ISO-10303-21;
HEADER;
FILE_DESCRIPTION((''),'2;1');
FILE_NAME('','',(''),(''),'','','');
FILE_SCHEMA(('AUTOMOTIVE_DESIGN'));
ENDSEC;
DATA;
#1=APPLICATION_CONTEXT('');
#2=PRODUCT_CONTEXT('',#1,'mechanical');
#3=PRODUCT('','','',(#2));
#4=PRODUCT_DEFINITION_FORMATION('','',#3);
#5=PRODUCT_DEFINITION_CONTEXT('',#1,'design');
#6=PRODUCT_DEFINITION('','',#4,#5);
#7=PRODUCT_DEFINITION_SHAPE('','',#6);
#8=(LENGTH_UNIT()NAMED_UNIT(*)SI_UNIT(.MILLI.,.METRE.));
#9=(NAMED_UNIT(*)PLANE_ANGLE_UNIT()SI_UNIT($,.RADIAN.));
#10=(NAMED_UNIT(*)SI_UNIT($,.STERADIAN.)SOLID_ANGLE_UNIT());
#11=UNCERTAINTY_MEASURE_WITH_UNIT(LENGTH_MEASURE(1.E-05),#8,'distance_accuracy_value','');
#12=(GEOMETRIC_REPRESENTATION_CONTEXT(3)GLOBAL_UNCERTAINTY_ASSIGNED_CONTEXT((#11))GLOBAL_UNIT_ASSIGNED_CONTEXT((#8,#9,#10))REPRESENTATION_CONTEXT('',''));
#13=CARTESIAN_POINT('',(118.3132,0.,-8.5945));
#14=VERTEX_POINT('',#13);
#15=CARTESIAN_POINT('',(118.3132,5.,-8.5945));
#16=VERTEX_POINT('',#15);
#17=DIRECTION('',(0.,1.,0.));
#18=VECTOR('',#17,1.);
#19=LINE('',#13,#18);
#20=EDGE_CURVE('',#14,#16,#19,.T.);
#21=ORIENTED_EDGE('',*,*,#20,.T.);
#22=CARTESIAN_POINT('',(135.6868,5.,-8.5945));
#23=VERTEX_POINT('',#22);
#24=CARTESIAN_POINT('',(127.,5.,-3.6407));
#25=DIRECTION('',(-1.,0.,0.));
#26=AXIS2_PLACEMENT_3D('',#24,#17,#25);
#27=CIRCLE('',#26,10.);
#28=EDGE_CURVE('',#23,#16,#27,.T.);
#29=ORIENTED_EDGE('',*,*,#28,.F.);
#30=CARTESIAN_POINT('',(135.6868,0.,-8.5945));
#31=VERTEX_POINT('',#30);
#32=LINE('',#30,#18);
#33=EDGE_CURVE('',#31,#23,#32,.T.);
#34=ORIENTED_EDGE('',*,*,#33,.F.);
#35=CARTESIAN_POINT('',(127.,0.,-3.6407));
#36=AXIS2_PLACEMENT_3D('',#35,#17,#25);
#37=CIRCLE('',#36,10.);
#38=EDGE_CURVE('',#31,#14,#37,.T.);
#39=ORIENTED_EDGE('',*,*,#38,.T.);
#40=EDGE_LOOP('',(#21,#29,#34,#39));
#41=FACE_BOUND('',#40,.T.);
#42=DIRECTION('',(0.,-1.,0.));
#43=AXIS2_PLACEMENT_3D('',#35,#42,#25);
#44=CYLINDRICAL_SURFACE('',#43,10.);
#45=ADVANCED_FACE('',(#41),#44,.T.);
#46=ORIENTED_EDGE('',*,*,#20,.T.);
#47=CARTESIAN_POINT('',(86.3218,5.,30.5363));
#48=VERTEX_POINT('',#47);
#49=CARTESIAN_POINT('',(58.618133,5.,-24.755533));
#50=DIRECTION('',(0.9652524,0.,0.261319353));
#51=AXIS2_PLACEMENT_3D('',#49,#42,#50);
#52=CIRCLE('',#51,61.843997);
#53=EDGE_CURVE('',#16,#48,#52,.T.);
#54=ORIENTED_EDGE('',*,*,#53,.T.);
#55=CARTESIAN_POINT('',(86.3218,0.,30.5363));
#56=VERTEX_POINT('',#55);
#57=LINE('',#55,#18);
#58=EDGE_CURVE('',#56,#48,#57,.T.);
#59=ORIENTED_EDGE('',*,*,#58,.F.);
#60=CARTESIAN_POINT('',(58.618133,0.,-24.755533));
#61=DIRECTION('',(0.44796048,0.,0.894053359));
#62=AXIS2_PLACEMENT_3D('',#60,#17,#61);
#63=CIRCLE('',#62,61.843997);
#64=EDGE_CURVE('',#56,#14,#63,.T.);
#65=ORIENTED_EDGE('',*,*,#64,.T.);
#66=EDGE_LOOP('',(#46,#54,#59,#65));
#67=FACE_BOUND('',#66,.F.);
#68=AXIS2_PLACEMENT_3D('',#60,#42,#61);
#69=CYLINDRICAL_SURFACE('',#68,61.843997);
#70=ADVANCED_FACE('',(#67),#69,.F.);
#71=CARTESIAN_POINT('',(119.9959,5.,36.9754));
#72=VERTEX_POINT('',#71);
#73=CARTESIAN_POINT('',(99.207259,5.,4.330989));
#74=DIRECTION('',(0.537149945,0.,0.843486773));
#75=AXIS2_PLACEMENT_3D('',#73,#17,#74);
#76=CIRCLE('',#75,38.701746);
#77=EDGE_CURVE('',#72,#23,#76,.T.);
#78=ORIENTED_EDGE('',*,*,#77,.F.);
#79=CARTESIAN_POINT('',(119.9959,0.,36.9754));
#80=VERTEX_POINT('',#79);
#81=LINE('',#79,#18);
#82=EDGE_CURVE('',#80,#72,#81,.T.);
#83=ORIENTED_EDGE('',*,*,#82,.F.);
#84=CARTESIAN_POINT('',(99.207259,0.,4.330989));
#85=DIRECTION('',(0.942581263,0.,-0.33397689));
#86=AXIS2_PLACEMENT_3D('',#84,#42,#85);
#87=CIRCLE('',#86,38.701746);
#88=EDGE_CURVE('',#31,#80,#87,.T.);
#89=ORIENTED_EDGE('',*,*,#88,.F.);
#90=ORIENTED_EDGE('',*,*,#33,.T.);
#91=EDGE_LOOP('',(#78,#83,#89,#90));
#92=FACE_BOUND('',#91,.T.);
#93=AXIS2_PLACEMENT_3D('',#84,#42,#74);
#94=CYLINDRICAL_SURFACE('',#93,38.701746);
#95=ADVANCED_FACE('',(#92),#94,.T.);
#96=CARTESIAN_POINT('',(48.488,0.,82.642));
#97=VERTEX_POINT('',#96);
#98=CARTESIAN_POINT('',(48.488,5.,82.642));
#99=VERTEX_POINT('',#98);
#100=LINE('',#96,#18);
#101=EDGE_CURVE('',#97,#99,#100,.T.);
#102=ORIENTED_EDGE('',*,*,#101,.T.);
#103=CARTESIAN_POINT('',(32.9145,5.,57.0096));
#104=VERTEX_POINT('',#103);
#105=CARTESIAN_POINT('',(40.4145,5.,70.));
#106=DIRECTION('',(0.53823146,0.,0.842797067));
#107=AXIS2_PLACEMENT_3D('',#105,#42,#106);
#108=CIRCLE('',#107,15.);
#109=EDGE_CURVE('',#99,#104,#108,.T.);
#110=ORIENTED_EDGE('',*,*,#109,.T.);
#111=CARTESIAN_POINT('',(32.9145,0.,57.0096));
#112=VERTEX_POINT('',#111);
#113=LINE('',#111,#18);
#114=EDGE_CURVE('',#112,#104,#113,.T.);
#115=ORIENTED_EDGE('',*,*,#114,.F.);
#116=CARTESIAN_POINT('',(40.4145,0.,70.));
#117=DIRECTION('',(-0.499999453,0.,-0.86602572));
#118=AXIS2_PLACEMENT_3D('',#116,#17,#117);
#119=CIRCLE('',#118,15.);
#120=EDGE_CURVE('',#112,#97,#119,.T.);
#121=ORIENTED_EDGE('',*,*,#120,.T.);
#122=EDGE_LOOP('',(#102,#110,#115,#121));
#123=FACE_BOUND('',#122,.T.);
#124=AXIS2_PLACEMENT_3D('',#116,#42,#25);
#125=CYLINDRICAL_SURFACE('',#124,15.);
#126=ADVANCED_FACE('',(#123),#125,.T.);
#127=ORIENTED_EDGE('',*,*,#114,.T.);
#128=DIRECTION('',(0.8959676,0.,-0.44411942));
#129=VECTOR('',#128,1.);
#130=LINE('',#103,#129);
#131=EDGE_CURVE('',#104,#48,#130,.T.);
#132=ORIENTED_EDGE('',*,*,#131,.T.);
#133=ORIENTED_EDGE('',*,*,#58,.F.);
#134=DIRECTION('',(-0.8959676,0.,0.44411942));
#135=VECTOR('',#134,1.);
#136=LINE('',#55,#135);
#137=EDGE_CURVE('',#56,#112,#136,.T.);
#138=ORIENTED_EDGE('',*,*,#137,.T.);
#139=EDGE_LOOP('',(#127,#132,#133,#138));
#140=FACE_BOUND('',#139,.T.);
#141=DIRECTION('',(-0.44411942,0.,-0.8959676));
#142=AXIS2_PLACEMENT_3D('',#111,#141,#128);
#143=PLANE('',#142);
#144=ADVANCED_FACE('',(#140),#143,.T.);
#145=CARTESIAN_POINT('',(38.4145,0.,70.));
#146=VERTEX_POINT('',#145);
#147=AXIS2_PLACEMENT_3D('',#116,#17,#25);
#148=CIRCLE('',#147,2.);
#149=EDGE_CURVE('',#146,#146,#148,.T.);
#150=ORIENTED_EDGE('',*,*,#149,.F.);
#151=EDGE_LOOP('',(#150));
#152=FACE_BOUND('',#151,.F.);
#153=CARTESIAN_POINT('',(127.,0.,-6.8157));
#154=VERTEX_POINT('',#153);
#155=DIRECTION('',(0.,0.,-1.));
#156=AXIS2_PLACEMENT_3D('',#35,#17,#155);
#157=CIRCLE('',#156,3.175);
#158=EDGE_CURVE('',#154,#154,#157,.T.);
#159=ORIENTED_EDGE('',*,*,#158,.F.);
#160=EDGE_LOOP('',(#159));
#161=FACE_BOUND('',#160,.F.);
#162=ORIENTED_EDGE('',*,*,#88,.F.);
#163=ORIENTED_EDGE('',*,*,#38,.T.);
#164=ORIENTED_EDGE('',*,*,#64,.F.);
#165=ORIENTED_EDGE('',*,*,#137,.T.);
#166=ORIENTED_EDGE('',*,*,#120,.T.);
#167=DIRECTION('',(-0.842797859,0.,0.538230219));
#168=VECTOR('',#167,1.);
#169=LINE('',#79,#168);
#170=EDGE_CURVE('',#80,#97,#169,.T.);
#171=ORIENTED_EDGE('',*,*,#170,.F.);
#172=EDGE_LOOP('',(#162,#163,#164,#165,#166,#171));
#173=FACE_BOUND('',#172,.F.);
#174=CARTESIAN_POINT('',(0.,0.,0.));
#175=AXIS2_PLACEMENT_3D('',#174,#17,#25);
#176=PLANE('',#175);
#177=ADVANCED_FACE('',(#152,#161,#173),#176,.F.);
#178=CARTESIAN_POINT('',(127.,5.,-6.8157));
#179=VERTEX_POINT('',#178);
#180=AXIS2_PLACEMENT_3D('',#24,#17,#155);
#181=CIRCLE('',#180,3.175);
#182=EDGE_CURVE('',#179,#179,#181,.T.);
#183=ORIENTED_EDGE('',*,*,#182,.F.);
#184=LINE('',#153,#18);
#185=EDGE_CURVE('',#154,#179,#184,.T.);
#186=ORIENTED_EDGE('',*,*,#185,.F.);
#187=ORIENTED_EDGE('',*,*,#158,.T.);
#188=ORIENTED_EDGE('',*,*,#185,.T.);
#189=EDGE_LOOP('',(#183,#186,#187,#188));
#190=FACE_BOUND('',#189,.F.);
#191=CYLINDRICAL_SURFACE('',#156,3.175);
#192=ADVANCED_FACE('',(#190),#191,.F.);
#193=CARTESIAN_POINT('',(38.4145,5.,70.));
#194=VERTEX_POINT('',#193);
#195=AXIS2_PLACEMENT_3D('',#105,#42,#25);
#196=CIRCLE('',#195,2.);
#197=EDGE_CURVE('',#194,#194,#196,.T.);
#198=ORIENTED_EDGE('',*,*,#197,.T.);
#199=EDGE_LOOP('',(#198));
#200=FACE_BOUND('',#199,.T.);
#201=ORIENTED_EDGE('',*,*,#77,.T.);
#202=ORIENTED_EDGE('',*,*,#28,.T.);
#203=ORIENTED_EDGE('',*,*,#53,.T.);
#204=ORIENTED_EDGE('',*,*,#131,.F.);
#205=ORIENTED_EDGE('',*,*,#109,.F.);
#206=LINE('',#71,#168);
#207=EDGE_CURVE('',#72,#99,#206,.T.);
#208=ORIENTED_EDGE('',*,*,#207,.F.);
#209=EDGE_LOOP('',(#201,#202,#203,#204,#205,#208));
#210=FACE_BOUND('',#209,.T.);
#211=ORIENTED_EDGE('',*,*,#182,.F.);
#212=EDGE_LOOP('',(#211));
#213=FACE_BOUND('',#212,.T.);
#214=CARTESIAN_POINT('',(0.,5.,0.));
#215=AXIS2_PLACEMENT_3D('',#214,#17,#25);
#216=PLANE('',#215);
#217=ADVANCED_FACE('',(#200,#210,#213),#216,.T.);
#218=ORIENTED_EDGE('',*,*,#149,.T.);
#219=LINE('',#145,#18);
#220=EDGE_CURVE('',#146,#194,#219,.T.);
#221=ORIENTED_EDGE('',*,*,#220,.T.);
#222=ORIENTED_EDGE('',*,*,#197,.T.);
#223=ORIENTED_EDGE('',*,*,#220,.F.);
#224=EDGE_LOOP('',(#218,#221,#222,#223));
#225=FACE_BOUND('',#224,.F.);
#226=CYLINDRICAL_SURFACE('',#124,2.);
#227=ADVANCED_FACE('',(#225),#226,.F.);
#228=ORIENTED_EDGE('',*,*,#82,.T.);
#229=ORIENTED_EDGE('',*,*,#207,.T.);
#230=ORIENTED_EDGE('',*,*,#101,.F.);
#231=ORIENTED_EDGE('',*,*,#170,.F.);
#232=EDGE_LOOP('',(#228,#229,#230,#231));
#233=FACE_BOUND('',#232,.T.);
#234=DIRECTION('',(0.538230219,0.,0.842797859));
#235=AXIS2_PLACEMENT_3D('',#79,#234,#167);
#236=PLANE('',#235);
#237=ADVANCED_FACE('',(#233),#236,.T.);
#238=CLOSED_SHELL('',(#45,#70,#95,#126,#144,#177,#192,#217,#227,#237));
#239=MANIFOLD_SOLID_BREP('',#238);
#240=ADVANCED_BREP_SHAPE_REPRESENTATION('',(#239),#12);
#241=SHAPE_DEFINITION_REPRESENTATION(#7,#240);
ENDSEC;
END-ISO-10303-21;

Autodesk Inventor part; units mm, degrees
ref_plane "YZ Plane" through (0, 0, 0) normal (1, 0, 0) x (0, 1, 0)
ref_plane "XZ Plane" through (0, 0, 0) normal (0, 1, 0) x (-1, 0, 0)
ref_plane "XY Plane" through (0, 0, 0) normal (0, 0, 1) x (1, 0, 0)
sketch "Cara" plane through (0, 0, 0) normal (0, 0, 1) x (1, 0, 0)
  line L0 (-22.1935, -24.9393) -> (-15.1747, -17.9205)
  arc A0 (-12.474, -17.8034) -> (-15.1747, -17.9205) centre (-13.7605, -19.3347) ccw
  arc A1 (-12.474, -17.8034) -> (-6.107, -21.4794) centre (1.0981, -1.6477) ccw
  arc A2 (-4.8581, -23.8768) -> (-6.107, -21.4794) centre (-6.79, -23.3592) ccw
  line L1 (-4.8581, -23.8768) -> (-7.4272, -33.4646)
  arc A3 (-9.9928, -34.8439) -> (-7.4272, -33.4646) centre (-9.359, -32.947) ccw
  arc A4 (-22.1052, -27.8509) -> (-9.9928, -34.8439) centre (1.0981, -1.6477) ccw
  arc A5 (-22.1935, -24.9393) -> (-22.1052, -27.8509) centre (-20.7793, -26.3535) ccw
  line L2 (9.6235, -33.4646) -> (7.0544, -23.8768)
  arc A6 (8.3033, -21.4794) -> (7.0544, -23.8768) centre (8.9863, -23.3592) ccw
  arc A7 (8.3033, -21.4794) -> (14.6703, -17.8034) centre (1.0981, -1.6477) ccw
  arc A8 (17.371, -17.9205) -> (14.6703, -17.8034) centre (15.9568, -19.3347) ccw
  line L3 (17.371, -17.9205) -> (24.3898, -24.9393)
  arc A9 (24.3015, -27.8509) -> (24.3898, -24.9393) centre (22.9756, -26.3535) ccw
  arc A10 (12.1891, -34.8439) -> (24.3015, -27.8509) centre (1.0981, -1.6477) ccw
  arc A11 (9.6235, -33.4646) -> (12.1891, -34.8439) centre (11.5553, -32.947) ccw
  line L4 (32.9151, -10.173) -> (23.3272, -7.604)
  arc A12 (21.8755, -5.3237) -> (23.3272, -7.604) centre (23.8449, -5.6721) ccw
  arc A13 (21.8755, -5.3237) -> (21.8755, 2.0283) centre (1.0981, -1.6477) ccw
  arc A14 (23.3272, 4.3086) -> (21.8755, 2.0283) centre (23.8449, 2.3767) ccw
  line L5 (23.3272, 4.3086) -> (32.9151, 6.8776)
  arc A15 (35.3924, 5.3454) -> (32.9151, 6.8776) centre (33.4327, 4.9458) ccw
  arc A16 (35.3924, -8.6408) -> (35.3924, 5.3454) centre (1.0981, -1.6477) ccw
  arc A17 (32.9151, -10.173) -> (35.3924, -8.6408) centre (33.4327, -8.2412) ccw
  line L6 (24.3898, 21.6439) -> (17.371, 14.6251)
  arc A18 (14.6703, 14.508) -> (17.371, 14.6251) centre (15.9568, 16.0394) ccw
  arc A19 (14.6703, 14.508) -> (8.3033, 18.184) centre (1.0981, -1.6477) ccw
  arc A20 (7.0544, 20.5814) -> (8.3033, 18.184) centre (8.9863, 20.0638) ccw
  line L7 (7.0544, 20.5814) -> (9.6235, 30.1693)
  arc A21 (12.1891, 31.5486) -> (9.6235, 30.1693) centre (11.5553, 29.6516) ccw
  arc A22 (24.3015, 24.5555) -> (12.1891, 31.5486) centre (1.0981, -1.6477) ccw
  arc A23 (24.3898, 21.6439) -> (24.3015, 24.5555) centre (22.9756, 23.0582) ccw
  line L8 (-7.4272, 30.1693) -> (-4.8581, 20.5814)
  arc A24 (-6.107, 18.184) -> (-4.8581, 20.5814) centre (-6.79, 20.0638) ccw
  arc A25 (-6.107, 18.184) -> (-12.474, 14.508) centre (1.0981, -1.6477) ccw
  arc A26 (-15.1747, 14.6251) -> (-12.474, 14.508) centre (-13.7605, 16.0394) ccw
  line L9 (-15.1747, 14.6251) -> (-22.1935, 21.6439)
  arc A27 (-22.1052, 24.5555) -> (-22.1935, 21.6439) centre (-20.7793, 23.0582) ccw
  arc A28 (-9.9928, 31.5486) -> (-22.1052, 24.5555) centre (1.0981, -1.6477) ccw
  arc A29 (-7.4272, 30.1693) -> (-9.9928, 31.5486) centre (-9.359, 29.6516) ccw
  line L10 (-30.7188, 6.8776) -> (-21.131, 4.3086)
  arc A30 (-19.6792, 2.0283) -> (-21.131, 4.3086) centre (-21.6486, 2.3767) ccw
  arc A31 (-19.6792, 2.0283) -> (-19.6792, -5.3237) centre (1.0981, -1.6477) ccw
  arc A32 (-21.131, -7.604) -> (-19.6792, -5.3237) centre (-21.6486, -5.6721) ccw
  line L11 (-21.131, -7.604) -> (-30.7188, -10.173)
  arc A33 (-33.1961, -8.6408) -> (-30.7188, -10.173) centre (-31.2365, -8.2412) ccw
  arc A34 (-33.1961, 5.3454) -> (-33.1961, -8.6408) centre (1.0981, -1.6477) ccw
  arc A35 (-30.7188, 6.8776) -> (-33.1961, 5.3454) centre (-31.2365, 4.9458) ccw
  circle A36 centre (-37.4568, -19.3542) radius 1.5875
  circle A37 centre (39.653, 16.0588) radius 1.5875
  circle A38 centre (-16.6083, 36.9072) radius 1.5875
  circle A39 centre (18.8046, -40.2026) radius 1.5875
  circle A40 centre (1.0981, -1.6477) radius 15.5
  arc A41 (13.186, 39.6183) -> (16.9444, 39.4394) centre (15.4349, 47.2957) ccw
  arc A42 (13.186, 39.6183) -> (-10.9897, 39.6183) centre (1.0981, -1.6477) ccw
  arc A43 (-15.0916, 39.5133) -> (-10.9897, 39.6183) centre (-13.2386, 47.2957) ccw
  arc A44 (-15.0916, 39.5133) -> (-19.5734, 37.455) centre (-16.0181, 35.6221) ccw
  arc A45 (-22.3261, 34.412) -> (-19.5734, 37.455) centre (-26.6841, 41.1208) ccw
  arc A46 (-22.3261, 34.412) -> (-34.8255, 21.9848) centre (1.0981, -1.6477) ccw
  arc A47 (-37.5746, 19.4158) -> (-34.8255, 21.9848) centre (-41.5089, 26.3816) ccw
  arc A48 (-39.989, 14.1986) -> (-37.5746, 19.4158) centre (-37.4054, 16.1703) ccw
  arc A49 (-40.1679, 10.4402) -> (-39.989, 14.1986) centre (-47.8453, 12.6891) ccw
  arc A50 (-40.1679, 10.4402) -> (-40.2027, -13.6161) centre (1.0981, -1.6477) ccw
  arc A51 (-40.1338, -17.8165) -> (-40.2027, -13.6161) centre (-47.8865, -15.8428) ccw
  arc A52 (-40.1338, -17.8165) -> (-38.0349, -22.3868) centre (-36.2575, -18.8034) ccw
  arc A53 (-34.8937, -25.1762) -> (-38.0349, -22.3868) centre (-41.5898, -29.5536) ccw
  arc A54 (-34.8937, -25.1762) -> (-22.5344, -37.5713) centre (1.0981, -1.6477) ccw
  arc A55 (-19.9654, -40.3204) -> (-22.5344, -37.5713) centre (-26.9311, -44.2547) ccw
  arc A56 (-14.7481, -42.7348) -> (-19.9654, -40.3204) centre (-16.7198, -40.1512) ccw
  arc A57 (-10.9897, -42.9137) -> (-14.7481, -42.7348) centre (-13.2386, -50.5911) ccw
  arc A58 (-10.9897, -42.9137) -> (13.0666, -42.9485) centre (1.0981, -1.6477) ccw
  arc A59 (17.2235, -42.8687) -> (13.0666, -42.9485) centre (15.2932, -50.6324) ccw
  arc A60 (17.2235, -42.8687) -> (21.7574, -40.7935) centre (18.1887, -38.9869) ccw
  arc A61 (24.5347, -37.6994) -> (21.7574, -40.7935) centre (28.895, -44.4067) ccw
  arc A62 (24.5347, -37.6994) -> (37.0217, -25.2802) centre (1.0981, -1.6477) ccw
  arc A63 (39.7709, -22.7112) -> (37.0217, -25.2802) centre (43.7052, -29.6769) ccw
  arc A64 (42.1093, -17.3982) -> (39.7709, -22.7112) centre (39.6017, -19.4656) ccw
  arc A65 (42.3332, -13.8408) -> (42.1093, -17.3982) centre (50.0048, -16.1093) ccw
  arc A66 (42.3332, -13.8408) -> (42.3989, 10.3207) centre (1.0981, -1.6477) ccw
  arc A67 (42.3301, 14.5211) -> (42.3989, 10.3207) centre (50.0828, 12.5474) ccw
  arc A68 (42.3301, 14.5211) -> (40.2312, 19.0914) centre (38.4538, 15.508) ccw
  arc A69 (37.09, 21.8808) -> (40.2312, 19.0914) centre (43.7861, 26.2582) ccw
  arc A70 (37.09, 21.8808) -> (24.7307, 34.2759) centre (1.0981, -1.6477) ccw
  arc A71 (22.1617, 37.0251) -> (24.7307, 34.2759) centre (29.1274, 40.9594) ccw
  arc A72 (16.9444, 39.4394) -> (22.1617, 37.0251) centre (18.9161, 36.8558) ccw
  arc A73 (-38.8583, 20.9988) -> (-42.0265, 14.1525) centre (-36.2077, 15.616) ccw
  spline S0 degree 3 poles (-40.2504, 14.5992) (-40.3671, 14.8104) (-40.4601, 15.0344) (-40.6458, 15.6766) (-40.6826, 16.1053) (-40.5958, 16.8869) (-40.4968, 17.2357) (-40.1864, 17.8912) (-39.9757, 18.1925) (-39.4148, 18.7612) (-39.0515, 19.0059) (-38.4565, 19.2528) (-38.255, 19.3143) (-38.0493, 19.3558) knots 0 0 0 0 0.118944 0.118944 0.328096 0.328096 0.504735 0.504735 0.683825 0.683825 0.89662 0.89662 1 1 1 1
  line L12 (-38.8583, 20.9988) -> (-38.0493, 19.3558)
  arc A74 (-38.8583, 20.9988) -> (-42.0265, 14.1525) centre (-36.2077, 15.616) ccw
  line L13 (-40.2504, 14.5992) -> (-42.0265, 14.1525)
  line L14 (-38.5582, 21.1573) -> (-37.5746, 19.4158)
  arc A75 (-37.5746, 19.4158) -> (-34.8255, 21.9848) centre (-41.5089, 26.3816) ccw
  line L15 (-36.4963, 23.084) -> (-34.8255, 21.9848)
  arc A76 (-38.5582, 21.1573) -> (-36.4963, 23.084) centre (-41.5089, 26.3816) ccw
  spline S1 degree 3 poles (-38.0493, 19.3558) (-37.9271, 19.3805) (-37.8093, 19.397) (-37.6564, 19.4108) (-37.6155, 19.4137) (-37.5746, 19.4158) knots 0 0 0 0 0.731153 0.731153 1 1 1 1
  line L16 (-38.5582, 21.1573) -> (-37.5746, 19.4158)
  arc A77 (-38.8583, 20.9988) -> (-38.5582, 21.1573) centre (-41.5089, 26.3816) ccw
  line L17 (-38.8583, 20.9988) -> (-38.0493, 19.3558)
  spline S2 degree 3 poles (-39.989, 14.1986) (-40.081, 14.3191) (-40.1695, 14.4526) (-40.2504, 14.5992) knots 0 0 0 0 1 1 1 1
  line L18 (-40.2504, 14.5992) -> (-42.0265, 14.1525)
  arc A78 (-41.953, 13.8212) -> (-42.0265, 14.1525) centre (-47.8453, 12.6891) ccw
  line L19 (-39.989, 14.1986) -> (-41.953, 13.8212)
  line L20 (-39.989, 14.1986) -> (-41.953, 13.8212)
  arc A79 (-42.0872, 11.0024) -> (-41.953, 13.8212) centre (-47.8453, 12.6891) ccw
  line L21 (-42.0872, 11.0024) -> (-40.1679, 10.4402)
  arc A80 (-40.1679, 10.4402) -> (-39.989, 14.1986) centre (-47.8453, 12.6891) ccw
  arc A81 (-42.0872, 11.0024) -> (-42.1236, -14.1728) centre (1.0981, -1.6477) ccw
  line L22 (-36.4963, 23.084) -> (-34.8255, 21.9848)
  arc A82 (-22.3261, 34.412) -> (-34.8255, 21.9848) centre (1.0981, -1.6477) ccw
  line L23 (-23.4156, 36.0892) -> (-22.3261, 34.412)
  arc A83 (-23.4156, 36.0892) -> (-36.4963, 23.084) centre (1.0981, -1.6477) ccw
  line L24 (-23.4156, 36.0892) -> (-22.3261, 34.412)
  arc A84 (-22.3261, 34.412) -> (-19.5734, 37.455) centre (-26.6841, 41.1208) ccw
  line L25 (-21.3511, 38.3714) -> (-19.5734, 37.455)
  arc A85 (-23.4156, 36.0892) -> (-21.3511, 38.3714) centre (-26.6841, 41.1208) ccw
  line L26 (-21.3511, 38.3714) -> (-19.5734, 37.455)
  arc A86 (-15.0916, 39.5133) -> (-19.5734, 37.455) centre (-16.0181, 35.6221) ccw
  line L27 (-14.6284, 41.4589) -> (-15.0916, 39.5133)
  arc A87 (-14.6284, 41.4589) -> (-21.3511, 38.3714) centre (-16.0181, 35.6221) ccw
  line L28 (-14.6284, 41.4589) -> (-15.0916, 39.5133)
  arc A88 (-15.0916, 39.5133) -> (-10.9897, 39.6183) centre (-13.2386, 47.2957) ccw
  line L29 (-11.5519, 41.5377) -> (-10.9897, 39.6183)
  arc A89 (-14.6284, 41.4589) -> (-11.5519, 41.5377) centre (-13.2386, 47.2957) ccw
  line L30 (-11.5519, 41.5377) -> (-10.9897, 39.6183)
  arc A90 (13.186, 39.6183) -> (-10.9897, 39.6183) centre (1.0981, -1.6477) ccw
  line L31 (13.7482, 41.5377) -> (13.186, 39.6183)
  arc A91 (13.7482, 41.5377) -> (-11.5519, 41.5377) centre (1.0981, -1.6477) ccw
  line L32 (16.9444, 39.4394) -> (16.567, 41.4035)
  arc A92 (13.7482, 41.5377) -> (16.567, 41.4035) centre (15.4349, 47.2957) ccw
  line L33 (13.7482, 41.5377) -> (13.186, 39.6183)
  arc A93 (13.186, 39.6183) -> (16.9444, 39.4394) centre (15.4349, 47.2957) ccw
  spline S3 degree 3 poles (16.9444, 39.4394) (17.0649, 39.5314) (17.1985, 39.6199) (17.3451, 39.7009) knots 0 0 0 0 1 1 1 1
  line L34 (17.3451, 39.7009) -> (16.8984, 41.4769)
  arc A94 (16.567, 41.4035) -> (16.8984, 41.4769) centre (15.4349, 47.2957) ccw
  line L35 (16.9444, 39.4394) -> (16.567, 41.4035)
  spline S4 degree 3 poles (17.3451, 39.7009) (17.5563, 39.8175) (17.7803, 39.9105) (18.4224, 40.0962) (18.8512, 40.133) (19.6327, 40.0462) (19.9815, 39.9473) (20.6371, 39.6368) (20.9383, 39.4261) (21.507, 38.8652) (21.7517, 38.502) (21.9986, 37.907) (22.0601, 37.7054) (22.1017, 37.4997) knots 0 0 0 0 0.118944 0.118944 0.328096 0.328096 0.504735 0.504735 0.683825 0.683825 0.89662 0.89662 1 1 1 1
  line L36 (23.7446, 38.3088) -> (22.1017, 37.4997)
  arc A95 (23.7446, 38.3088) -> (16.8984, 41.4769) centre (18.3618, 35.6581) ccw
  line L37 (17.3451, 39.7009) -> (16.8984, 41.4769)
  line L38 (37.09, 21.8808) -> (38.764, 22.9751)
  arc A96 (38.764, 22.9751) -> (25.8298, 35.9468) centre (1.0981, -1.6477) ccw
  line L39 (25.8298, 35.9468) -> (24.7307, 34.2759)
  arc A97 (37.09, 21.8808) -> (24.7307, 34.2759) centre (1.0981, -1.6477) ccw
  line L40 (23.9031, 38.0086) -> (22.1617, 37.0251)
  arc A98 (22.1617, 37.0251) -> (24.7307, 34.2759) centre (29.1274, 40.9594) ccw
  line L41 (25.8298, 35.9468) -> (24.7307, 34.2759)
  arc A99 (23.9031, 38.0086) -> (25.8298, 35.9468) centre (29.1274, 40.9594) ccw
  spline S5 degree 3 poles (22.1017, 37.4997) (22.1264, 37.3775) (22.1428, 37.2598) (22.1566, 37.1069) (22.1595, 37.0659) (22.1617, 37.0251) knots 0 0 0 0 0.731153 0.731153 1 1 1 1
  line L42 (23.9031, 38.0086) -> (22.1617, 37.0251)
  arc A100 (23.7446, 38.3088) -> (23.9031, 38.0086) centre (29.1274, 40.9594) ccw
  line L43 (23.7446, 38.3088) -> (22.1017, 37.4997)
  line L44 (37.09, 21.8808) -> (38.764, 22.9751)
  arc A101 (37.09, 21.8808) -> (40.2312, 19.0914) centre (43.7861, 26.2582) ccw
  line L45 (41.1199, 20.8831) -> (40.2312, 19.0914)
  arc A102 (38.764, 22.9751) -> (41.1199, 20.8831) centre (43.7861, 26.2582) ccw
  line L46 (41.1199, 20.8831) -> (40.2312, 19.0914)
  arc A103 (42.3301, 14.5211) -> (40.2312, 19.0914) centre (38.4538, 15.508) ccw
  line L47 (44.2683, 14.0277) -> (42.3301, 14.5211)
  arc A104 (44.2683, 14.0277) -> (41.1199, 20.8831) centre (38.4538, 15.508) ccw
  line L48 (44.2683, 14.0277) -> (42.3301, 14.5211)
  arc A105 (42.3301, 14.5211) -> (42.3989, 10.3207) centre (50.0828, 12.5474) ccw
  line L49 (44.3199, 10.8774) -> (42.3989, 10.3207)
  arc A106 (44.2683, 14.0277) -> (44.3199, 10.8774) centre (50.0828, 12.5474) ccw
  line L50 (44.3199, 10.8774) -> (42.3989, 10.3207)
  arc A107 (42.3332, -13.8408) -> (42.3989, 10.3207) centre (1.0981, -1.6477) ccw
  line L51 (44.2511, -14.4079) -> (42.3332, -13.8408)
  arc A108 (44.2511, -14.4079) -> (44.3199, 10.8774) centre (1.0981, -1.6477) ccw
  spline S6 degree 3 poles (42.4708, -17.939) (42.66, -18.2947) (42.7816, -18.6826) (42.8764, -19.4825) (42.8492, -19.8873) (42.6667, -20.5952) (42.5369, -20.899) (42.1389, -21.5409) (41.845, -21.8556) (41.1886, -22.3275) (40.8415, -22.494) (40.3834, -22.6216) (40.2925, -22.6427) (40.2009, -22.6599) knots 0 0 0 0 0.198107 0.198107 0.395669 0.395669 0.556952 0.556952 0.766408 0.766408 0.954091 0.954091 1 1 1 1
  line L52 (41.0245, -24.3091) -> (40.2009, -22.6599)
  arc A109 (41.0245, -24.3091) -> (44.1743, -17.5253) centre (38.3438, -18.9413) ccw
  line L53 (42.4708, -17.939) -> (44.1743, -17.5253)
  line L54 (42.1093, -17.3982) -> (44.0832, -17.076)
  arc A110 (44.2511, -14.4079) -> (44.0832, -17.076) centre (50.0048, -16.1093) ccw
  line L55 (44.2511, -14.4079) -> (42.3332, -13.8408)
  arc A111 (42.3332, -13.8408) -> (42.1093, -17.3982) centre (50.0048, -16.1093) ccw
  spline S7 degree 3 poles (42.1093, -17.3982) (42.1251, -17.4173) (42.1406, -17.4367) (42.2692, -17.6002) (42.376, -17.7609) (42.4708, -17.939) knots 0 0 0 0 0.119683 0.119683 1 1 1 1
  line L56 (42.4708, -17.939) -> (44.1743, -17.5253)
  arc A112 (44.0832, -17.076) -> (44.1743, -17.5253) centre (50.0048, -16.1093) ccw
  line L57 (42.1093, -17.3982) -> (44.0832, -17.076)
  spline S8 degree 3 poles (40.2009, -22.6599) (40.0946, -22.6799) (39.9919, -22.6936) (39.8527, -22.7062) (39.8117, -22.7091) (39.7709, -22.7112) knots 0 0 0 0 0.704713 0.704713 1 1 1 1
  line L58 (40.7545, -24.4527) -> (39.7709, -22.7112)
  arc A113 (41.0245, -24.3091) -> (40.7545, -24.4527) centre (43.7052, -29.6769) ccw
  line L59 (41.0245, -24.3091) -> (40.2009, -22.6599)
  line L60 (40.7545, -24.4527) -> (39.7709, -22.7112)
  arc A114 (39.7709, -22.7112) -> (37.0217, -25.2802) centre (43.7052, -29.6769) ccw
  line L61 (38.6926, -26.3794) -> (37.0217, -25.2802)
  arc A115 (40.7545, -24.4527) -> (38.6926, -26.3794) centre (43.7052, -29.6769) ccw
  line L62 (38.6926, -26.3794) -> (37.0217, -25.2802)
  arc A116 (24.5347, -37.6994) -> (37.0217, -25.2802) centre (1.0981, -1.6477) ccw
  line L63 (25.6248, -39.3763) -> (24.5347, -37.6994)
  arc A117 (25.6248, -39.3763) -> (38.6926, -26.3794) centre (1.0981, -1.6477) ccw
  line L64 (25.6248, -39.3763) -> (24.5347, -37.6994)
  arc A118 (24.5347, -37.6994) -> (21.7574, -40.7935) centre (28.895, -44.4067) ccw
  line L65 (23.5418, -41.6968) -> (21.7574, -40.7935)
  arc A119 (25.6248, -39.3763) -> (23.5418, -41.6968) centre (28.895, -44.4067) ccw
  line L66 (23.5418, -41.6968) -> (21.7574, -40.7935)
  arc A120 (17.2235, -42.8687) -> (21.7574, -40.7935) centre (18.1887, -38.9869) ccw
  line L67 (16.7409, -44.8096) -> (17.2235, -42.8687)
  arc A121 (16.7409, -44.8096) -> (23.5418, -41.6968) centre (18.1887, -38.9869) ccw
  line L68 (16.7409, -44.8096) -> (17.2235, -42.8687)
  arc A122 (17.2235, -42.8687) -> (13.0666, -42.9485) centre (15.2932, -50.6324) ccw
  line L69 (13.6232, -44.8695) -> (13.0666, -42.9485)
  arc A123 (16.7409, -44.8096) -> (13.6232, -44.8695) centre (15.2932, -50.6324) ccw
  arc A124 (-10.9897, -42.9137) -> (13.0666, -42.9485) centre (1.0981, -1.6477) ccw
  line L70 (13.6232, -44.8695) -> (13.0666, -42.9485)
  arc A125 (-10.9897, -42.9137) -> (13.0666, -42.9485) centre (1.0981, -1.6477) ccw
  line L71 (-11.5519, -44.8331) -> (-10.9897, -42.9137)
  arc A126 (-11.5519, -44.8331) -> (13.6232, -44.8695) centre (1.0981, -1.6477) ccw
  line L72 (-14.7481, -42.7348) -> (-14.3707, -44.6989)
  arc A127 (-11.5519, -44.8331) -> (-14.3707, -44.6989) centre (-13.2386, -50.5911) ccw
  line L73 (-11.5519, -44.8331) -> (-10.9897, -42.9137)
  arc A128 (-10.9897, -42.9137) -> (-14.7481, -42.7348) centre (-13.2386, -50.5911) ccw
  spline S9 degree 3 poles (-15.1488, -42.9963) (-15.36, -43.1129) (-15.584, -43.2059) (-16.2261, -43.3916) (-16.6549, -43.4284) (-17.4365, -43.3416) (-17.7852, -43.2427) (-18.4408, -42.9322) (-18.742, -42.7215) (-19.3107, -42.1606) (-19.5554, -41.7973) (-19.8023, -41.2024) (-19.8638, -41.0008) (-19.9054, -40.7951) knots 0 0 0 0 0.118944 0.118944 0.328096 0.328096 0.504735 0.504735 0.683825 0.683825 0.89662 0.89662 1 1 1 1
  line L74 (-21.5483, -41.6041) -> (-19.9054, -40.7951)
  arc A129 (-21.5483, -41.6041) -> (-14.7021, -44.7723) centre (-16.1656, -38.9535) ccw
  line L75 (-15.1488, -42.9963) -> (-14.7021, -44.7723)
  spline S10 degree 3 poles (-14.7481, -42.7348) (-14.8686, -42.8268) (-15.0022, -42.9153) (-15.1488, -42.9963) knots 0 0 0 0 1 1 1 1
  line L76 (-15.1488, -42.9963) -> (-14.7021, -44.7723)
  arc A130 (-14.3707, -44.6989) -> (-14.7021, -44.7723) centre (-13.2386, -50.5911) ccw
  line L77 (-14.7481, -42.7348) -> (-14.3707, -44.6989)
  spline S11 degree 3 poles (-19.9054, -40.7951) (-19.9301, -40.6729) (-19.9466, -40.5552) (-19.9604, -40.4023) (-19.9633, -40.3613) (-19.9654, -40.3204) knots 0 0 0 0 0.731153 0.731153 1 1 1 1
  line L78 (-21.7068, -41.304) -> (-19.9654, -40.3204)
  arc A131 (-21.5483, -41.6041) -> (-21.7068, -41.304) centre (-26.9311, -44.2547) ccw
  line L79 (-21.5483, -41.6041) -> (-19.9054, -40.7951)
  circle A132 centre (-16.7198, -40.1512) radius 3.25
  circle A133 centre (-16.7198, -40.1512) radius 1.5875
  circle A134 centre (39.6017, -19.4656) radius 3.25
  circle A135 centre (39.6017, -19.4656) radius 1.5875
  circle A136 centre (18.9161, 36.8558) radius 3.25
  circle A137 centre (18.9161, 36.8558) radius 1.5875
  circle A138 centre (-37.4054, 16.1703) radius 3.25
  circle A139 centre (-37.4054, 16.1703) radius 1.5875
  line L80 (-42.072, -17.3231) -> (-40.1338, -17.8165)
  arc A140 (-40.1338, -17.8165) -> (-40.2027, -13.6161) centre (-47.8865, -15.8428) ccw
  line L81 (-42.1236, -14.1728) -> (-40.2027, -13.6161)
  arc A141 (-42.072, -17.3231) -> (-42.1236, -14.1728) centre (-47.8865, -15.8428) ccw
  line L82 (-38.9237, -24.1785) -> (-38.0349, -22.3868)
  arc A142 (-40.1338, -17.8165) -> (-38.0349, -22.3868) centre (-36.2575, -18.8034) ccw
  line L83 (-42.072, -17.3231) -> (-40.1338, -17.8165)
  arc A143 (-42.072, -17.3231) -> (-38.9237, -24.1785) centre (-36.2575, -18.8034) ccw
  line L84 (-36.5677, -26.2705) -> (-34.8937, -25.1762)
  arc A144 (-34.8937, -25.1762) -> (-38.0349, -22.3868) centre (-41.5898, -29.5536) ccw
  line L85 (-38.9237, -24.1785) -> (-38.0349, -22.3868)
  arc A145 (-36.5677, -26.2705) -> (-38.9237, -24.1785) centre (-41.5898, -29.5536) ccw
  line L86 (-23.6336, -39.2421) -> (-22.5344, -37.5713)
  arc A146 (-34.8937, -25.1762) -> (-22.5344, -37.5713) centre (1.0981, -1.6477) ccw
  line L87 (-36.5677, -26.2705) -> (-34.8937, -25.1762)
  arc A147 (-36.5677, -26.2705) -> (-23.6336, -39.2421) centre (1.0981, -1.6477) ccw
  line L88 (-21.7068, -41.304) -> (-19.9654, -40.3204)
  arc A148 (-19.9654, -40.3204) -> (-22.5344, -37.5713) centre (-26.9311, -44.2547) ccw
  line L89 (-23.6336, -39.2421) -> (-22.5344, -37.5713)
  arc A149 (-21.7068, -41.304) -> (-23.6336, -39.2421) centre (-26.9311, -44.2547) ccw
  point P0 (1.3022, -1.7009)
  dimension "d1" = 30
  dimension "d2" = 40
  dimension "d3" = 70
  dimension "d4" = 90
  dimension "d5" = 65
  dimension "d6" = 95
  dimension "d7" = 100
  dimension "d8" = 72
  dimension "d9" = 17
  dimension "d10" = 110
  dimension "d11" = 4
sketch "Sketch1" plane through (0, 0, 0) normal (0, 1, 0) x (-1, 0, 0)
  line L0 (124.1031, 264.7872) -> (124.1031, -182.5054) construction
  line L1 (124.1031, -182.5054) -> (-344.0995, -182.5054) construction
  line L2 (-344.0995, -182.5054) -> (-344.0995, 264.7872) construction
  line L3 (-344.0995, 264.7872) -> (124.1031, 264.7872) construction
  circle A0 centre (0, 0) radius 50
  circle A1 centre (0, 0) radius 17.5
  line L4 (0, 0) -> (-80, -30.4436)
  line L5 (0, 0) -> (0, -17.5)
  line L6 (0, 0) -> (-17.5, 0)
  circle A2 centre (-80, -30.4436) radius 10
  line L7 (0, 0) -> (12.3744, -12.3744)
  line L8 (-80, -30.4436) -> (-80, -40.4436)
  line L9 (-80, -30.4436) -> (-72.9289, -37.5146)
  arc A3 (-80, -40.4436) -> (12.3744, -12.3744) centre (-63.3574, 70.821) ccw
  line L10 (-80, -30.4436) -> (-80, -20.4436)
  line L11 (0, 0) -> (-12.3744, 12.3744)
  arc A4 (-80, -20.4436) -> (-12.3744, 12.3744) centre (-83.4964, 72.8458) ccw
  circle A5 centre (0, 0) radius 7.6
  circle A6 centre (7.5887, 0.4145) radius 1.5
  circle A7 centre (-0.4145, 7.5887) radius 1.5
  circle A8 centre (-7.5887, -0.4145) radius 1.5
  circle A9 centre (0.4145, -7.5887) radius 1.5
  line L12 (-80, -30.4436) -> (-254.3472, 68.982)
  circle A10 centre (-127, -3.6407) radius 10
  arc A11 (-86.3218, 30.5363) -> (-118.3132, -8.5945) centre (-58.618, -24.7557) ccw
  line L13 (-118.3132, -8.5945) -> (-135.6868, -8.5945)
  arc A12 (-119.9959, 36.9754) -> (-135.6868, -8.5945) centre (-99.2074, 4.3311) ccw
  line L14 (0, 0) -> (0, 50)
  line L15 (0, 0) -> (-40.4145, 70)
  circle A13 centre (-40.4145, 70) radius 2
  circle A14 centre (-40.4145, 70) radius 15
  line L16 (-32.9145, 57.0096) -> (-86.3218, 30.5363)
  line L17 (-119.9959, 36.9754) -> (-48.488, 82.642)
  circle A15 centre (-127, -3.6407) radius 1.5
  point P0 (0, 25)
  dimension "d44" = 100
  dimension "d68" = 15.2
  dimension "d55" = 35
  dimension "d56" = 80
  dimension "d65" = 20
  dimension "d66" = 45
  dimension "d67" = 45
  dimension "d69" = 3
  dimension "d72" = 360
  dimension "d91" = 20
  dimension "d92" = 47
  dimension "d103" = 30
  dimension "d107" = 70
  dimension "d108" = 40
  dimension "d109" = 4
  dimension "d110" = 30
  dimension "d114" = 3
extrude "Extrusion3" add sketch "Sketch1" along normal blind 5 contours L16 A14 | L16 A11 A10 L12 A12 L17 A14 | L13 A12 A10 L12 A15 | L12 A15 A10 A11 | A10 L13 | A15 L12 | L12 A15 | A12 L12 A10 picked at (-47.1628, 78.1615)
hole "Hole1" at (127, 0, -3.6407) direction (0, 1, 0) diameter 6.35 end through all
properties part number "Link2V1"
